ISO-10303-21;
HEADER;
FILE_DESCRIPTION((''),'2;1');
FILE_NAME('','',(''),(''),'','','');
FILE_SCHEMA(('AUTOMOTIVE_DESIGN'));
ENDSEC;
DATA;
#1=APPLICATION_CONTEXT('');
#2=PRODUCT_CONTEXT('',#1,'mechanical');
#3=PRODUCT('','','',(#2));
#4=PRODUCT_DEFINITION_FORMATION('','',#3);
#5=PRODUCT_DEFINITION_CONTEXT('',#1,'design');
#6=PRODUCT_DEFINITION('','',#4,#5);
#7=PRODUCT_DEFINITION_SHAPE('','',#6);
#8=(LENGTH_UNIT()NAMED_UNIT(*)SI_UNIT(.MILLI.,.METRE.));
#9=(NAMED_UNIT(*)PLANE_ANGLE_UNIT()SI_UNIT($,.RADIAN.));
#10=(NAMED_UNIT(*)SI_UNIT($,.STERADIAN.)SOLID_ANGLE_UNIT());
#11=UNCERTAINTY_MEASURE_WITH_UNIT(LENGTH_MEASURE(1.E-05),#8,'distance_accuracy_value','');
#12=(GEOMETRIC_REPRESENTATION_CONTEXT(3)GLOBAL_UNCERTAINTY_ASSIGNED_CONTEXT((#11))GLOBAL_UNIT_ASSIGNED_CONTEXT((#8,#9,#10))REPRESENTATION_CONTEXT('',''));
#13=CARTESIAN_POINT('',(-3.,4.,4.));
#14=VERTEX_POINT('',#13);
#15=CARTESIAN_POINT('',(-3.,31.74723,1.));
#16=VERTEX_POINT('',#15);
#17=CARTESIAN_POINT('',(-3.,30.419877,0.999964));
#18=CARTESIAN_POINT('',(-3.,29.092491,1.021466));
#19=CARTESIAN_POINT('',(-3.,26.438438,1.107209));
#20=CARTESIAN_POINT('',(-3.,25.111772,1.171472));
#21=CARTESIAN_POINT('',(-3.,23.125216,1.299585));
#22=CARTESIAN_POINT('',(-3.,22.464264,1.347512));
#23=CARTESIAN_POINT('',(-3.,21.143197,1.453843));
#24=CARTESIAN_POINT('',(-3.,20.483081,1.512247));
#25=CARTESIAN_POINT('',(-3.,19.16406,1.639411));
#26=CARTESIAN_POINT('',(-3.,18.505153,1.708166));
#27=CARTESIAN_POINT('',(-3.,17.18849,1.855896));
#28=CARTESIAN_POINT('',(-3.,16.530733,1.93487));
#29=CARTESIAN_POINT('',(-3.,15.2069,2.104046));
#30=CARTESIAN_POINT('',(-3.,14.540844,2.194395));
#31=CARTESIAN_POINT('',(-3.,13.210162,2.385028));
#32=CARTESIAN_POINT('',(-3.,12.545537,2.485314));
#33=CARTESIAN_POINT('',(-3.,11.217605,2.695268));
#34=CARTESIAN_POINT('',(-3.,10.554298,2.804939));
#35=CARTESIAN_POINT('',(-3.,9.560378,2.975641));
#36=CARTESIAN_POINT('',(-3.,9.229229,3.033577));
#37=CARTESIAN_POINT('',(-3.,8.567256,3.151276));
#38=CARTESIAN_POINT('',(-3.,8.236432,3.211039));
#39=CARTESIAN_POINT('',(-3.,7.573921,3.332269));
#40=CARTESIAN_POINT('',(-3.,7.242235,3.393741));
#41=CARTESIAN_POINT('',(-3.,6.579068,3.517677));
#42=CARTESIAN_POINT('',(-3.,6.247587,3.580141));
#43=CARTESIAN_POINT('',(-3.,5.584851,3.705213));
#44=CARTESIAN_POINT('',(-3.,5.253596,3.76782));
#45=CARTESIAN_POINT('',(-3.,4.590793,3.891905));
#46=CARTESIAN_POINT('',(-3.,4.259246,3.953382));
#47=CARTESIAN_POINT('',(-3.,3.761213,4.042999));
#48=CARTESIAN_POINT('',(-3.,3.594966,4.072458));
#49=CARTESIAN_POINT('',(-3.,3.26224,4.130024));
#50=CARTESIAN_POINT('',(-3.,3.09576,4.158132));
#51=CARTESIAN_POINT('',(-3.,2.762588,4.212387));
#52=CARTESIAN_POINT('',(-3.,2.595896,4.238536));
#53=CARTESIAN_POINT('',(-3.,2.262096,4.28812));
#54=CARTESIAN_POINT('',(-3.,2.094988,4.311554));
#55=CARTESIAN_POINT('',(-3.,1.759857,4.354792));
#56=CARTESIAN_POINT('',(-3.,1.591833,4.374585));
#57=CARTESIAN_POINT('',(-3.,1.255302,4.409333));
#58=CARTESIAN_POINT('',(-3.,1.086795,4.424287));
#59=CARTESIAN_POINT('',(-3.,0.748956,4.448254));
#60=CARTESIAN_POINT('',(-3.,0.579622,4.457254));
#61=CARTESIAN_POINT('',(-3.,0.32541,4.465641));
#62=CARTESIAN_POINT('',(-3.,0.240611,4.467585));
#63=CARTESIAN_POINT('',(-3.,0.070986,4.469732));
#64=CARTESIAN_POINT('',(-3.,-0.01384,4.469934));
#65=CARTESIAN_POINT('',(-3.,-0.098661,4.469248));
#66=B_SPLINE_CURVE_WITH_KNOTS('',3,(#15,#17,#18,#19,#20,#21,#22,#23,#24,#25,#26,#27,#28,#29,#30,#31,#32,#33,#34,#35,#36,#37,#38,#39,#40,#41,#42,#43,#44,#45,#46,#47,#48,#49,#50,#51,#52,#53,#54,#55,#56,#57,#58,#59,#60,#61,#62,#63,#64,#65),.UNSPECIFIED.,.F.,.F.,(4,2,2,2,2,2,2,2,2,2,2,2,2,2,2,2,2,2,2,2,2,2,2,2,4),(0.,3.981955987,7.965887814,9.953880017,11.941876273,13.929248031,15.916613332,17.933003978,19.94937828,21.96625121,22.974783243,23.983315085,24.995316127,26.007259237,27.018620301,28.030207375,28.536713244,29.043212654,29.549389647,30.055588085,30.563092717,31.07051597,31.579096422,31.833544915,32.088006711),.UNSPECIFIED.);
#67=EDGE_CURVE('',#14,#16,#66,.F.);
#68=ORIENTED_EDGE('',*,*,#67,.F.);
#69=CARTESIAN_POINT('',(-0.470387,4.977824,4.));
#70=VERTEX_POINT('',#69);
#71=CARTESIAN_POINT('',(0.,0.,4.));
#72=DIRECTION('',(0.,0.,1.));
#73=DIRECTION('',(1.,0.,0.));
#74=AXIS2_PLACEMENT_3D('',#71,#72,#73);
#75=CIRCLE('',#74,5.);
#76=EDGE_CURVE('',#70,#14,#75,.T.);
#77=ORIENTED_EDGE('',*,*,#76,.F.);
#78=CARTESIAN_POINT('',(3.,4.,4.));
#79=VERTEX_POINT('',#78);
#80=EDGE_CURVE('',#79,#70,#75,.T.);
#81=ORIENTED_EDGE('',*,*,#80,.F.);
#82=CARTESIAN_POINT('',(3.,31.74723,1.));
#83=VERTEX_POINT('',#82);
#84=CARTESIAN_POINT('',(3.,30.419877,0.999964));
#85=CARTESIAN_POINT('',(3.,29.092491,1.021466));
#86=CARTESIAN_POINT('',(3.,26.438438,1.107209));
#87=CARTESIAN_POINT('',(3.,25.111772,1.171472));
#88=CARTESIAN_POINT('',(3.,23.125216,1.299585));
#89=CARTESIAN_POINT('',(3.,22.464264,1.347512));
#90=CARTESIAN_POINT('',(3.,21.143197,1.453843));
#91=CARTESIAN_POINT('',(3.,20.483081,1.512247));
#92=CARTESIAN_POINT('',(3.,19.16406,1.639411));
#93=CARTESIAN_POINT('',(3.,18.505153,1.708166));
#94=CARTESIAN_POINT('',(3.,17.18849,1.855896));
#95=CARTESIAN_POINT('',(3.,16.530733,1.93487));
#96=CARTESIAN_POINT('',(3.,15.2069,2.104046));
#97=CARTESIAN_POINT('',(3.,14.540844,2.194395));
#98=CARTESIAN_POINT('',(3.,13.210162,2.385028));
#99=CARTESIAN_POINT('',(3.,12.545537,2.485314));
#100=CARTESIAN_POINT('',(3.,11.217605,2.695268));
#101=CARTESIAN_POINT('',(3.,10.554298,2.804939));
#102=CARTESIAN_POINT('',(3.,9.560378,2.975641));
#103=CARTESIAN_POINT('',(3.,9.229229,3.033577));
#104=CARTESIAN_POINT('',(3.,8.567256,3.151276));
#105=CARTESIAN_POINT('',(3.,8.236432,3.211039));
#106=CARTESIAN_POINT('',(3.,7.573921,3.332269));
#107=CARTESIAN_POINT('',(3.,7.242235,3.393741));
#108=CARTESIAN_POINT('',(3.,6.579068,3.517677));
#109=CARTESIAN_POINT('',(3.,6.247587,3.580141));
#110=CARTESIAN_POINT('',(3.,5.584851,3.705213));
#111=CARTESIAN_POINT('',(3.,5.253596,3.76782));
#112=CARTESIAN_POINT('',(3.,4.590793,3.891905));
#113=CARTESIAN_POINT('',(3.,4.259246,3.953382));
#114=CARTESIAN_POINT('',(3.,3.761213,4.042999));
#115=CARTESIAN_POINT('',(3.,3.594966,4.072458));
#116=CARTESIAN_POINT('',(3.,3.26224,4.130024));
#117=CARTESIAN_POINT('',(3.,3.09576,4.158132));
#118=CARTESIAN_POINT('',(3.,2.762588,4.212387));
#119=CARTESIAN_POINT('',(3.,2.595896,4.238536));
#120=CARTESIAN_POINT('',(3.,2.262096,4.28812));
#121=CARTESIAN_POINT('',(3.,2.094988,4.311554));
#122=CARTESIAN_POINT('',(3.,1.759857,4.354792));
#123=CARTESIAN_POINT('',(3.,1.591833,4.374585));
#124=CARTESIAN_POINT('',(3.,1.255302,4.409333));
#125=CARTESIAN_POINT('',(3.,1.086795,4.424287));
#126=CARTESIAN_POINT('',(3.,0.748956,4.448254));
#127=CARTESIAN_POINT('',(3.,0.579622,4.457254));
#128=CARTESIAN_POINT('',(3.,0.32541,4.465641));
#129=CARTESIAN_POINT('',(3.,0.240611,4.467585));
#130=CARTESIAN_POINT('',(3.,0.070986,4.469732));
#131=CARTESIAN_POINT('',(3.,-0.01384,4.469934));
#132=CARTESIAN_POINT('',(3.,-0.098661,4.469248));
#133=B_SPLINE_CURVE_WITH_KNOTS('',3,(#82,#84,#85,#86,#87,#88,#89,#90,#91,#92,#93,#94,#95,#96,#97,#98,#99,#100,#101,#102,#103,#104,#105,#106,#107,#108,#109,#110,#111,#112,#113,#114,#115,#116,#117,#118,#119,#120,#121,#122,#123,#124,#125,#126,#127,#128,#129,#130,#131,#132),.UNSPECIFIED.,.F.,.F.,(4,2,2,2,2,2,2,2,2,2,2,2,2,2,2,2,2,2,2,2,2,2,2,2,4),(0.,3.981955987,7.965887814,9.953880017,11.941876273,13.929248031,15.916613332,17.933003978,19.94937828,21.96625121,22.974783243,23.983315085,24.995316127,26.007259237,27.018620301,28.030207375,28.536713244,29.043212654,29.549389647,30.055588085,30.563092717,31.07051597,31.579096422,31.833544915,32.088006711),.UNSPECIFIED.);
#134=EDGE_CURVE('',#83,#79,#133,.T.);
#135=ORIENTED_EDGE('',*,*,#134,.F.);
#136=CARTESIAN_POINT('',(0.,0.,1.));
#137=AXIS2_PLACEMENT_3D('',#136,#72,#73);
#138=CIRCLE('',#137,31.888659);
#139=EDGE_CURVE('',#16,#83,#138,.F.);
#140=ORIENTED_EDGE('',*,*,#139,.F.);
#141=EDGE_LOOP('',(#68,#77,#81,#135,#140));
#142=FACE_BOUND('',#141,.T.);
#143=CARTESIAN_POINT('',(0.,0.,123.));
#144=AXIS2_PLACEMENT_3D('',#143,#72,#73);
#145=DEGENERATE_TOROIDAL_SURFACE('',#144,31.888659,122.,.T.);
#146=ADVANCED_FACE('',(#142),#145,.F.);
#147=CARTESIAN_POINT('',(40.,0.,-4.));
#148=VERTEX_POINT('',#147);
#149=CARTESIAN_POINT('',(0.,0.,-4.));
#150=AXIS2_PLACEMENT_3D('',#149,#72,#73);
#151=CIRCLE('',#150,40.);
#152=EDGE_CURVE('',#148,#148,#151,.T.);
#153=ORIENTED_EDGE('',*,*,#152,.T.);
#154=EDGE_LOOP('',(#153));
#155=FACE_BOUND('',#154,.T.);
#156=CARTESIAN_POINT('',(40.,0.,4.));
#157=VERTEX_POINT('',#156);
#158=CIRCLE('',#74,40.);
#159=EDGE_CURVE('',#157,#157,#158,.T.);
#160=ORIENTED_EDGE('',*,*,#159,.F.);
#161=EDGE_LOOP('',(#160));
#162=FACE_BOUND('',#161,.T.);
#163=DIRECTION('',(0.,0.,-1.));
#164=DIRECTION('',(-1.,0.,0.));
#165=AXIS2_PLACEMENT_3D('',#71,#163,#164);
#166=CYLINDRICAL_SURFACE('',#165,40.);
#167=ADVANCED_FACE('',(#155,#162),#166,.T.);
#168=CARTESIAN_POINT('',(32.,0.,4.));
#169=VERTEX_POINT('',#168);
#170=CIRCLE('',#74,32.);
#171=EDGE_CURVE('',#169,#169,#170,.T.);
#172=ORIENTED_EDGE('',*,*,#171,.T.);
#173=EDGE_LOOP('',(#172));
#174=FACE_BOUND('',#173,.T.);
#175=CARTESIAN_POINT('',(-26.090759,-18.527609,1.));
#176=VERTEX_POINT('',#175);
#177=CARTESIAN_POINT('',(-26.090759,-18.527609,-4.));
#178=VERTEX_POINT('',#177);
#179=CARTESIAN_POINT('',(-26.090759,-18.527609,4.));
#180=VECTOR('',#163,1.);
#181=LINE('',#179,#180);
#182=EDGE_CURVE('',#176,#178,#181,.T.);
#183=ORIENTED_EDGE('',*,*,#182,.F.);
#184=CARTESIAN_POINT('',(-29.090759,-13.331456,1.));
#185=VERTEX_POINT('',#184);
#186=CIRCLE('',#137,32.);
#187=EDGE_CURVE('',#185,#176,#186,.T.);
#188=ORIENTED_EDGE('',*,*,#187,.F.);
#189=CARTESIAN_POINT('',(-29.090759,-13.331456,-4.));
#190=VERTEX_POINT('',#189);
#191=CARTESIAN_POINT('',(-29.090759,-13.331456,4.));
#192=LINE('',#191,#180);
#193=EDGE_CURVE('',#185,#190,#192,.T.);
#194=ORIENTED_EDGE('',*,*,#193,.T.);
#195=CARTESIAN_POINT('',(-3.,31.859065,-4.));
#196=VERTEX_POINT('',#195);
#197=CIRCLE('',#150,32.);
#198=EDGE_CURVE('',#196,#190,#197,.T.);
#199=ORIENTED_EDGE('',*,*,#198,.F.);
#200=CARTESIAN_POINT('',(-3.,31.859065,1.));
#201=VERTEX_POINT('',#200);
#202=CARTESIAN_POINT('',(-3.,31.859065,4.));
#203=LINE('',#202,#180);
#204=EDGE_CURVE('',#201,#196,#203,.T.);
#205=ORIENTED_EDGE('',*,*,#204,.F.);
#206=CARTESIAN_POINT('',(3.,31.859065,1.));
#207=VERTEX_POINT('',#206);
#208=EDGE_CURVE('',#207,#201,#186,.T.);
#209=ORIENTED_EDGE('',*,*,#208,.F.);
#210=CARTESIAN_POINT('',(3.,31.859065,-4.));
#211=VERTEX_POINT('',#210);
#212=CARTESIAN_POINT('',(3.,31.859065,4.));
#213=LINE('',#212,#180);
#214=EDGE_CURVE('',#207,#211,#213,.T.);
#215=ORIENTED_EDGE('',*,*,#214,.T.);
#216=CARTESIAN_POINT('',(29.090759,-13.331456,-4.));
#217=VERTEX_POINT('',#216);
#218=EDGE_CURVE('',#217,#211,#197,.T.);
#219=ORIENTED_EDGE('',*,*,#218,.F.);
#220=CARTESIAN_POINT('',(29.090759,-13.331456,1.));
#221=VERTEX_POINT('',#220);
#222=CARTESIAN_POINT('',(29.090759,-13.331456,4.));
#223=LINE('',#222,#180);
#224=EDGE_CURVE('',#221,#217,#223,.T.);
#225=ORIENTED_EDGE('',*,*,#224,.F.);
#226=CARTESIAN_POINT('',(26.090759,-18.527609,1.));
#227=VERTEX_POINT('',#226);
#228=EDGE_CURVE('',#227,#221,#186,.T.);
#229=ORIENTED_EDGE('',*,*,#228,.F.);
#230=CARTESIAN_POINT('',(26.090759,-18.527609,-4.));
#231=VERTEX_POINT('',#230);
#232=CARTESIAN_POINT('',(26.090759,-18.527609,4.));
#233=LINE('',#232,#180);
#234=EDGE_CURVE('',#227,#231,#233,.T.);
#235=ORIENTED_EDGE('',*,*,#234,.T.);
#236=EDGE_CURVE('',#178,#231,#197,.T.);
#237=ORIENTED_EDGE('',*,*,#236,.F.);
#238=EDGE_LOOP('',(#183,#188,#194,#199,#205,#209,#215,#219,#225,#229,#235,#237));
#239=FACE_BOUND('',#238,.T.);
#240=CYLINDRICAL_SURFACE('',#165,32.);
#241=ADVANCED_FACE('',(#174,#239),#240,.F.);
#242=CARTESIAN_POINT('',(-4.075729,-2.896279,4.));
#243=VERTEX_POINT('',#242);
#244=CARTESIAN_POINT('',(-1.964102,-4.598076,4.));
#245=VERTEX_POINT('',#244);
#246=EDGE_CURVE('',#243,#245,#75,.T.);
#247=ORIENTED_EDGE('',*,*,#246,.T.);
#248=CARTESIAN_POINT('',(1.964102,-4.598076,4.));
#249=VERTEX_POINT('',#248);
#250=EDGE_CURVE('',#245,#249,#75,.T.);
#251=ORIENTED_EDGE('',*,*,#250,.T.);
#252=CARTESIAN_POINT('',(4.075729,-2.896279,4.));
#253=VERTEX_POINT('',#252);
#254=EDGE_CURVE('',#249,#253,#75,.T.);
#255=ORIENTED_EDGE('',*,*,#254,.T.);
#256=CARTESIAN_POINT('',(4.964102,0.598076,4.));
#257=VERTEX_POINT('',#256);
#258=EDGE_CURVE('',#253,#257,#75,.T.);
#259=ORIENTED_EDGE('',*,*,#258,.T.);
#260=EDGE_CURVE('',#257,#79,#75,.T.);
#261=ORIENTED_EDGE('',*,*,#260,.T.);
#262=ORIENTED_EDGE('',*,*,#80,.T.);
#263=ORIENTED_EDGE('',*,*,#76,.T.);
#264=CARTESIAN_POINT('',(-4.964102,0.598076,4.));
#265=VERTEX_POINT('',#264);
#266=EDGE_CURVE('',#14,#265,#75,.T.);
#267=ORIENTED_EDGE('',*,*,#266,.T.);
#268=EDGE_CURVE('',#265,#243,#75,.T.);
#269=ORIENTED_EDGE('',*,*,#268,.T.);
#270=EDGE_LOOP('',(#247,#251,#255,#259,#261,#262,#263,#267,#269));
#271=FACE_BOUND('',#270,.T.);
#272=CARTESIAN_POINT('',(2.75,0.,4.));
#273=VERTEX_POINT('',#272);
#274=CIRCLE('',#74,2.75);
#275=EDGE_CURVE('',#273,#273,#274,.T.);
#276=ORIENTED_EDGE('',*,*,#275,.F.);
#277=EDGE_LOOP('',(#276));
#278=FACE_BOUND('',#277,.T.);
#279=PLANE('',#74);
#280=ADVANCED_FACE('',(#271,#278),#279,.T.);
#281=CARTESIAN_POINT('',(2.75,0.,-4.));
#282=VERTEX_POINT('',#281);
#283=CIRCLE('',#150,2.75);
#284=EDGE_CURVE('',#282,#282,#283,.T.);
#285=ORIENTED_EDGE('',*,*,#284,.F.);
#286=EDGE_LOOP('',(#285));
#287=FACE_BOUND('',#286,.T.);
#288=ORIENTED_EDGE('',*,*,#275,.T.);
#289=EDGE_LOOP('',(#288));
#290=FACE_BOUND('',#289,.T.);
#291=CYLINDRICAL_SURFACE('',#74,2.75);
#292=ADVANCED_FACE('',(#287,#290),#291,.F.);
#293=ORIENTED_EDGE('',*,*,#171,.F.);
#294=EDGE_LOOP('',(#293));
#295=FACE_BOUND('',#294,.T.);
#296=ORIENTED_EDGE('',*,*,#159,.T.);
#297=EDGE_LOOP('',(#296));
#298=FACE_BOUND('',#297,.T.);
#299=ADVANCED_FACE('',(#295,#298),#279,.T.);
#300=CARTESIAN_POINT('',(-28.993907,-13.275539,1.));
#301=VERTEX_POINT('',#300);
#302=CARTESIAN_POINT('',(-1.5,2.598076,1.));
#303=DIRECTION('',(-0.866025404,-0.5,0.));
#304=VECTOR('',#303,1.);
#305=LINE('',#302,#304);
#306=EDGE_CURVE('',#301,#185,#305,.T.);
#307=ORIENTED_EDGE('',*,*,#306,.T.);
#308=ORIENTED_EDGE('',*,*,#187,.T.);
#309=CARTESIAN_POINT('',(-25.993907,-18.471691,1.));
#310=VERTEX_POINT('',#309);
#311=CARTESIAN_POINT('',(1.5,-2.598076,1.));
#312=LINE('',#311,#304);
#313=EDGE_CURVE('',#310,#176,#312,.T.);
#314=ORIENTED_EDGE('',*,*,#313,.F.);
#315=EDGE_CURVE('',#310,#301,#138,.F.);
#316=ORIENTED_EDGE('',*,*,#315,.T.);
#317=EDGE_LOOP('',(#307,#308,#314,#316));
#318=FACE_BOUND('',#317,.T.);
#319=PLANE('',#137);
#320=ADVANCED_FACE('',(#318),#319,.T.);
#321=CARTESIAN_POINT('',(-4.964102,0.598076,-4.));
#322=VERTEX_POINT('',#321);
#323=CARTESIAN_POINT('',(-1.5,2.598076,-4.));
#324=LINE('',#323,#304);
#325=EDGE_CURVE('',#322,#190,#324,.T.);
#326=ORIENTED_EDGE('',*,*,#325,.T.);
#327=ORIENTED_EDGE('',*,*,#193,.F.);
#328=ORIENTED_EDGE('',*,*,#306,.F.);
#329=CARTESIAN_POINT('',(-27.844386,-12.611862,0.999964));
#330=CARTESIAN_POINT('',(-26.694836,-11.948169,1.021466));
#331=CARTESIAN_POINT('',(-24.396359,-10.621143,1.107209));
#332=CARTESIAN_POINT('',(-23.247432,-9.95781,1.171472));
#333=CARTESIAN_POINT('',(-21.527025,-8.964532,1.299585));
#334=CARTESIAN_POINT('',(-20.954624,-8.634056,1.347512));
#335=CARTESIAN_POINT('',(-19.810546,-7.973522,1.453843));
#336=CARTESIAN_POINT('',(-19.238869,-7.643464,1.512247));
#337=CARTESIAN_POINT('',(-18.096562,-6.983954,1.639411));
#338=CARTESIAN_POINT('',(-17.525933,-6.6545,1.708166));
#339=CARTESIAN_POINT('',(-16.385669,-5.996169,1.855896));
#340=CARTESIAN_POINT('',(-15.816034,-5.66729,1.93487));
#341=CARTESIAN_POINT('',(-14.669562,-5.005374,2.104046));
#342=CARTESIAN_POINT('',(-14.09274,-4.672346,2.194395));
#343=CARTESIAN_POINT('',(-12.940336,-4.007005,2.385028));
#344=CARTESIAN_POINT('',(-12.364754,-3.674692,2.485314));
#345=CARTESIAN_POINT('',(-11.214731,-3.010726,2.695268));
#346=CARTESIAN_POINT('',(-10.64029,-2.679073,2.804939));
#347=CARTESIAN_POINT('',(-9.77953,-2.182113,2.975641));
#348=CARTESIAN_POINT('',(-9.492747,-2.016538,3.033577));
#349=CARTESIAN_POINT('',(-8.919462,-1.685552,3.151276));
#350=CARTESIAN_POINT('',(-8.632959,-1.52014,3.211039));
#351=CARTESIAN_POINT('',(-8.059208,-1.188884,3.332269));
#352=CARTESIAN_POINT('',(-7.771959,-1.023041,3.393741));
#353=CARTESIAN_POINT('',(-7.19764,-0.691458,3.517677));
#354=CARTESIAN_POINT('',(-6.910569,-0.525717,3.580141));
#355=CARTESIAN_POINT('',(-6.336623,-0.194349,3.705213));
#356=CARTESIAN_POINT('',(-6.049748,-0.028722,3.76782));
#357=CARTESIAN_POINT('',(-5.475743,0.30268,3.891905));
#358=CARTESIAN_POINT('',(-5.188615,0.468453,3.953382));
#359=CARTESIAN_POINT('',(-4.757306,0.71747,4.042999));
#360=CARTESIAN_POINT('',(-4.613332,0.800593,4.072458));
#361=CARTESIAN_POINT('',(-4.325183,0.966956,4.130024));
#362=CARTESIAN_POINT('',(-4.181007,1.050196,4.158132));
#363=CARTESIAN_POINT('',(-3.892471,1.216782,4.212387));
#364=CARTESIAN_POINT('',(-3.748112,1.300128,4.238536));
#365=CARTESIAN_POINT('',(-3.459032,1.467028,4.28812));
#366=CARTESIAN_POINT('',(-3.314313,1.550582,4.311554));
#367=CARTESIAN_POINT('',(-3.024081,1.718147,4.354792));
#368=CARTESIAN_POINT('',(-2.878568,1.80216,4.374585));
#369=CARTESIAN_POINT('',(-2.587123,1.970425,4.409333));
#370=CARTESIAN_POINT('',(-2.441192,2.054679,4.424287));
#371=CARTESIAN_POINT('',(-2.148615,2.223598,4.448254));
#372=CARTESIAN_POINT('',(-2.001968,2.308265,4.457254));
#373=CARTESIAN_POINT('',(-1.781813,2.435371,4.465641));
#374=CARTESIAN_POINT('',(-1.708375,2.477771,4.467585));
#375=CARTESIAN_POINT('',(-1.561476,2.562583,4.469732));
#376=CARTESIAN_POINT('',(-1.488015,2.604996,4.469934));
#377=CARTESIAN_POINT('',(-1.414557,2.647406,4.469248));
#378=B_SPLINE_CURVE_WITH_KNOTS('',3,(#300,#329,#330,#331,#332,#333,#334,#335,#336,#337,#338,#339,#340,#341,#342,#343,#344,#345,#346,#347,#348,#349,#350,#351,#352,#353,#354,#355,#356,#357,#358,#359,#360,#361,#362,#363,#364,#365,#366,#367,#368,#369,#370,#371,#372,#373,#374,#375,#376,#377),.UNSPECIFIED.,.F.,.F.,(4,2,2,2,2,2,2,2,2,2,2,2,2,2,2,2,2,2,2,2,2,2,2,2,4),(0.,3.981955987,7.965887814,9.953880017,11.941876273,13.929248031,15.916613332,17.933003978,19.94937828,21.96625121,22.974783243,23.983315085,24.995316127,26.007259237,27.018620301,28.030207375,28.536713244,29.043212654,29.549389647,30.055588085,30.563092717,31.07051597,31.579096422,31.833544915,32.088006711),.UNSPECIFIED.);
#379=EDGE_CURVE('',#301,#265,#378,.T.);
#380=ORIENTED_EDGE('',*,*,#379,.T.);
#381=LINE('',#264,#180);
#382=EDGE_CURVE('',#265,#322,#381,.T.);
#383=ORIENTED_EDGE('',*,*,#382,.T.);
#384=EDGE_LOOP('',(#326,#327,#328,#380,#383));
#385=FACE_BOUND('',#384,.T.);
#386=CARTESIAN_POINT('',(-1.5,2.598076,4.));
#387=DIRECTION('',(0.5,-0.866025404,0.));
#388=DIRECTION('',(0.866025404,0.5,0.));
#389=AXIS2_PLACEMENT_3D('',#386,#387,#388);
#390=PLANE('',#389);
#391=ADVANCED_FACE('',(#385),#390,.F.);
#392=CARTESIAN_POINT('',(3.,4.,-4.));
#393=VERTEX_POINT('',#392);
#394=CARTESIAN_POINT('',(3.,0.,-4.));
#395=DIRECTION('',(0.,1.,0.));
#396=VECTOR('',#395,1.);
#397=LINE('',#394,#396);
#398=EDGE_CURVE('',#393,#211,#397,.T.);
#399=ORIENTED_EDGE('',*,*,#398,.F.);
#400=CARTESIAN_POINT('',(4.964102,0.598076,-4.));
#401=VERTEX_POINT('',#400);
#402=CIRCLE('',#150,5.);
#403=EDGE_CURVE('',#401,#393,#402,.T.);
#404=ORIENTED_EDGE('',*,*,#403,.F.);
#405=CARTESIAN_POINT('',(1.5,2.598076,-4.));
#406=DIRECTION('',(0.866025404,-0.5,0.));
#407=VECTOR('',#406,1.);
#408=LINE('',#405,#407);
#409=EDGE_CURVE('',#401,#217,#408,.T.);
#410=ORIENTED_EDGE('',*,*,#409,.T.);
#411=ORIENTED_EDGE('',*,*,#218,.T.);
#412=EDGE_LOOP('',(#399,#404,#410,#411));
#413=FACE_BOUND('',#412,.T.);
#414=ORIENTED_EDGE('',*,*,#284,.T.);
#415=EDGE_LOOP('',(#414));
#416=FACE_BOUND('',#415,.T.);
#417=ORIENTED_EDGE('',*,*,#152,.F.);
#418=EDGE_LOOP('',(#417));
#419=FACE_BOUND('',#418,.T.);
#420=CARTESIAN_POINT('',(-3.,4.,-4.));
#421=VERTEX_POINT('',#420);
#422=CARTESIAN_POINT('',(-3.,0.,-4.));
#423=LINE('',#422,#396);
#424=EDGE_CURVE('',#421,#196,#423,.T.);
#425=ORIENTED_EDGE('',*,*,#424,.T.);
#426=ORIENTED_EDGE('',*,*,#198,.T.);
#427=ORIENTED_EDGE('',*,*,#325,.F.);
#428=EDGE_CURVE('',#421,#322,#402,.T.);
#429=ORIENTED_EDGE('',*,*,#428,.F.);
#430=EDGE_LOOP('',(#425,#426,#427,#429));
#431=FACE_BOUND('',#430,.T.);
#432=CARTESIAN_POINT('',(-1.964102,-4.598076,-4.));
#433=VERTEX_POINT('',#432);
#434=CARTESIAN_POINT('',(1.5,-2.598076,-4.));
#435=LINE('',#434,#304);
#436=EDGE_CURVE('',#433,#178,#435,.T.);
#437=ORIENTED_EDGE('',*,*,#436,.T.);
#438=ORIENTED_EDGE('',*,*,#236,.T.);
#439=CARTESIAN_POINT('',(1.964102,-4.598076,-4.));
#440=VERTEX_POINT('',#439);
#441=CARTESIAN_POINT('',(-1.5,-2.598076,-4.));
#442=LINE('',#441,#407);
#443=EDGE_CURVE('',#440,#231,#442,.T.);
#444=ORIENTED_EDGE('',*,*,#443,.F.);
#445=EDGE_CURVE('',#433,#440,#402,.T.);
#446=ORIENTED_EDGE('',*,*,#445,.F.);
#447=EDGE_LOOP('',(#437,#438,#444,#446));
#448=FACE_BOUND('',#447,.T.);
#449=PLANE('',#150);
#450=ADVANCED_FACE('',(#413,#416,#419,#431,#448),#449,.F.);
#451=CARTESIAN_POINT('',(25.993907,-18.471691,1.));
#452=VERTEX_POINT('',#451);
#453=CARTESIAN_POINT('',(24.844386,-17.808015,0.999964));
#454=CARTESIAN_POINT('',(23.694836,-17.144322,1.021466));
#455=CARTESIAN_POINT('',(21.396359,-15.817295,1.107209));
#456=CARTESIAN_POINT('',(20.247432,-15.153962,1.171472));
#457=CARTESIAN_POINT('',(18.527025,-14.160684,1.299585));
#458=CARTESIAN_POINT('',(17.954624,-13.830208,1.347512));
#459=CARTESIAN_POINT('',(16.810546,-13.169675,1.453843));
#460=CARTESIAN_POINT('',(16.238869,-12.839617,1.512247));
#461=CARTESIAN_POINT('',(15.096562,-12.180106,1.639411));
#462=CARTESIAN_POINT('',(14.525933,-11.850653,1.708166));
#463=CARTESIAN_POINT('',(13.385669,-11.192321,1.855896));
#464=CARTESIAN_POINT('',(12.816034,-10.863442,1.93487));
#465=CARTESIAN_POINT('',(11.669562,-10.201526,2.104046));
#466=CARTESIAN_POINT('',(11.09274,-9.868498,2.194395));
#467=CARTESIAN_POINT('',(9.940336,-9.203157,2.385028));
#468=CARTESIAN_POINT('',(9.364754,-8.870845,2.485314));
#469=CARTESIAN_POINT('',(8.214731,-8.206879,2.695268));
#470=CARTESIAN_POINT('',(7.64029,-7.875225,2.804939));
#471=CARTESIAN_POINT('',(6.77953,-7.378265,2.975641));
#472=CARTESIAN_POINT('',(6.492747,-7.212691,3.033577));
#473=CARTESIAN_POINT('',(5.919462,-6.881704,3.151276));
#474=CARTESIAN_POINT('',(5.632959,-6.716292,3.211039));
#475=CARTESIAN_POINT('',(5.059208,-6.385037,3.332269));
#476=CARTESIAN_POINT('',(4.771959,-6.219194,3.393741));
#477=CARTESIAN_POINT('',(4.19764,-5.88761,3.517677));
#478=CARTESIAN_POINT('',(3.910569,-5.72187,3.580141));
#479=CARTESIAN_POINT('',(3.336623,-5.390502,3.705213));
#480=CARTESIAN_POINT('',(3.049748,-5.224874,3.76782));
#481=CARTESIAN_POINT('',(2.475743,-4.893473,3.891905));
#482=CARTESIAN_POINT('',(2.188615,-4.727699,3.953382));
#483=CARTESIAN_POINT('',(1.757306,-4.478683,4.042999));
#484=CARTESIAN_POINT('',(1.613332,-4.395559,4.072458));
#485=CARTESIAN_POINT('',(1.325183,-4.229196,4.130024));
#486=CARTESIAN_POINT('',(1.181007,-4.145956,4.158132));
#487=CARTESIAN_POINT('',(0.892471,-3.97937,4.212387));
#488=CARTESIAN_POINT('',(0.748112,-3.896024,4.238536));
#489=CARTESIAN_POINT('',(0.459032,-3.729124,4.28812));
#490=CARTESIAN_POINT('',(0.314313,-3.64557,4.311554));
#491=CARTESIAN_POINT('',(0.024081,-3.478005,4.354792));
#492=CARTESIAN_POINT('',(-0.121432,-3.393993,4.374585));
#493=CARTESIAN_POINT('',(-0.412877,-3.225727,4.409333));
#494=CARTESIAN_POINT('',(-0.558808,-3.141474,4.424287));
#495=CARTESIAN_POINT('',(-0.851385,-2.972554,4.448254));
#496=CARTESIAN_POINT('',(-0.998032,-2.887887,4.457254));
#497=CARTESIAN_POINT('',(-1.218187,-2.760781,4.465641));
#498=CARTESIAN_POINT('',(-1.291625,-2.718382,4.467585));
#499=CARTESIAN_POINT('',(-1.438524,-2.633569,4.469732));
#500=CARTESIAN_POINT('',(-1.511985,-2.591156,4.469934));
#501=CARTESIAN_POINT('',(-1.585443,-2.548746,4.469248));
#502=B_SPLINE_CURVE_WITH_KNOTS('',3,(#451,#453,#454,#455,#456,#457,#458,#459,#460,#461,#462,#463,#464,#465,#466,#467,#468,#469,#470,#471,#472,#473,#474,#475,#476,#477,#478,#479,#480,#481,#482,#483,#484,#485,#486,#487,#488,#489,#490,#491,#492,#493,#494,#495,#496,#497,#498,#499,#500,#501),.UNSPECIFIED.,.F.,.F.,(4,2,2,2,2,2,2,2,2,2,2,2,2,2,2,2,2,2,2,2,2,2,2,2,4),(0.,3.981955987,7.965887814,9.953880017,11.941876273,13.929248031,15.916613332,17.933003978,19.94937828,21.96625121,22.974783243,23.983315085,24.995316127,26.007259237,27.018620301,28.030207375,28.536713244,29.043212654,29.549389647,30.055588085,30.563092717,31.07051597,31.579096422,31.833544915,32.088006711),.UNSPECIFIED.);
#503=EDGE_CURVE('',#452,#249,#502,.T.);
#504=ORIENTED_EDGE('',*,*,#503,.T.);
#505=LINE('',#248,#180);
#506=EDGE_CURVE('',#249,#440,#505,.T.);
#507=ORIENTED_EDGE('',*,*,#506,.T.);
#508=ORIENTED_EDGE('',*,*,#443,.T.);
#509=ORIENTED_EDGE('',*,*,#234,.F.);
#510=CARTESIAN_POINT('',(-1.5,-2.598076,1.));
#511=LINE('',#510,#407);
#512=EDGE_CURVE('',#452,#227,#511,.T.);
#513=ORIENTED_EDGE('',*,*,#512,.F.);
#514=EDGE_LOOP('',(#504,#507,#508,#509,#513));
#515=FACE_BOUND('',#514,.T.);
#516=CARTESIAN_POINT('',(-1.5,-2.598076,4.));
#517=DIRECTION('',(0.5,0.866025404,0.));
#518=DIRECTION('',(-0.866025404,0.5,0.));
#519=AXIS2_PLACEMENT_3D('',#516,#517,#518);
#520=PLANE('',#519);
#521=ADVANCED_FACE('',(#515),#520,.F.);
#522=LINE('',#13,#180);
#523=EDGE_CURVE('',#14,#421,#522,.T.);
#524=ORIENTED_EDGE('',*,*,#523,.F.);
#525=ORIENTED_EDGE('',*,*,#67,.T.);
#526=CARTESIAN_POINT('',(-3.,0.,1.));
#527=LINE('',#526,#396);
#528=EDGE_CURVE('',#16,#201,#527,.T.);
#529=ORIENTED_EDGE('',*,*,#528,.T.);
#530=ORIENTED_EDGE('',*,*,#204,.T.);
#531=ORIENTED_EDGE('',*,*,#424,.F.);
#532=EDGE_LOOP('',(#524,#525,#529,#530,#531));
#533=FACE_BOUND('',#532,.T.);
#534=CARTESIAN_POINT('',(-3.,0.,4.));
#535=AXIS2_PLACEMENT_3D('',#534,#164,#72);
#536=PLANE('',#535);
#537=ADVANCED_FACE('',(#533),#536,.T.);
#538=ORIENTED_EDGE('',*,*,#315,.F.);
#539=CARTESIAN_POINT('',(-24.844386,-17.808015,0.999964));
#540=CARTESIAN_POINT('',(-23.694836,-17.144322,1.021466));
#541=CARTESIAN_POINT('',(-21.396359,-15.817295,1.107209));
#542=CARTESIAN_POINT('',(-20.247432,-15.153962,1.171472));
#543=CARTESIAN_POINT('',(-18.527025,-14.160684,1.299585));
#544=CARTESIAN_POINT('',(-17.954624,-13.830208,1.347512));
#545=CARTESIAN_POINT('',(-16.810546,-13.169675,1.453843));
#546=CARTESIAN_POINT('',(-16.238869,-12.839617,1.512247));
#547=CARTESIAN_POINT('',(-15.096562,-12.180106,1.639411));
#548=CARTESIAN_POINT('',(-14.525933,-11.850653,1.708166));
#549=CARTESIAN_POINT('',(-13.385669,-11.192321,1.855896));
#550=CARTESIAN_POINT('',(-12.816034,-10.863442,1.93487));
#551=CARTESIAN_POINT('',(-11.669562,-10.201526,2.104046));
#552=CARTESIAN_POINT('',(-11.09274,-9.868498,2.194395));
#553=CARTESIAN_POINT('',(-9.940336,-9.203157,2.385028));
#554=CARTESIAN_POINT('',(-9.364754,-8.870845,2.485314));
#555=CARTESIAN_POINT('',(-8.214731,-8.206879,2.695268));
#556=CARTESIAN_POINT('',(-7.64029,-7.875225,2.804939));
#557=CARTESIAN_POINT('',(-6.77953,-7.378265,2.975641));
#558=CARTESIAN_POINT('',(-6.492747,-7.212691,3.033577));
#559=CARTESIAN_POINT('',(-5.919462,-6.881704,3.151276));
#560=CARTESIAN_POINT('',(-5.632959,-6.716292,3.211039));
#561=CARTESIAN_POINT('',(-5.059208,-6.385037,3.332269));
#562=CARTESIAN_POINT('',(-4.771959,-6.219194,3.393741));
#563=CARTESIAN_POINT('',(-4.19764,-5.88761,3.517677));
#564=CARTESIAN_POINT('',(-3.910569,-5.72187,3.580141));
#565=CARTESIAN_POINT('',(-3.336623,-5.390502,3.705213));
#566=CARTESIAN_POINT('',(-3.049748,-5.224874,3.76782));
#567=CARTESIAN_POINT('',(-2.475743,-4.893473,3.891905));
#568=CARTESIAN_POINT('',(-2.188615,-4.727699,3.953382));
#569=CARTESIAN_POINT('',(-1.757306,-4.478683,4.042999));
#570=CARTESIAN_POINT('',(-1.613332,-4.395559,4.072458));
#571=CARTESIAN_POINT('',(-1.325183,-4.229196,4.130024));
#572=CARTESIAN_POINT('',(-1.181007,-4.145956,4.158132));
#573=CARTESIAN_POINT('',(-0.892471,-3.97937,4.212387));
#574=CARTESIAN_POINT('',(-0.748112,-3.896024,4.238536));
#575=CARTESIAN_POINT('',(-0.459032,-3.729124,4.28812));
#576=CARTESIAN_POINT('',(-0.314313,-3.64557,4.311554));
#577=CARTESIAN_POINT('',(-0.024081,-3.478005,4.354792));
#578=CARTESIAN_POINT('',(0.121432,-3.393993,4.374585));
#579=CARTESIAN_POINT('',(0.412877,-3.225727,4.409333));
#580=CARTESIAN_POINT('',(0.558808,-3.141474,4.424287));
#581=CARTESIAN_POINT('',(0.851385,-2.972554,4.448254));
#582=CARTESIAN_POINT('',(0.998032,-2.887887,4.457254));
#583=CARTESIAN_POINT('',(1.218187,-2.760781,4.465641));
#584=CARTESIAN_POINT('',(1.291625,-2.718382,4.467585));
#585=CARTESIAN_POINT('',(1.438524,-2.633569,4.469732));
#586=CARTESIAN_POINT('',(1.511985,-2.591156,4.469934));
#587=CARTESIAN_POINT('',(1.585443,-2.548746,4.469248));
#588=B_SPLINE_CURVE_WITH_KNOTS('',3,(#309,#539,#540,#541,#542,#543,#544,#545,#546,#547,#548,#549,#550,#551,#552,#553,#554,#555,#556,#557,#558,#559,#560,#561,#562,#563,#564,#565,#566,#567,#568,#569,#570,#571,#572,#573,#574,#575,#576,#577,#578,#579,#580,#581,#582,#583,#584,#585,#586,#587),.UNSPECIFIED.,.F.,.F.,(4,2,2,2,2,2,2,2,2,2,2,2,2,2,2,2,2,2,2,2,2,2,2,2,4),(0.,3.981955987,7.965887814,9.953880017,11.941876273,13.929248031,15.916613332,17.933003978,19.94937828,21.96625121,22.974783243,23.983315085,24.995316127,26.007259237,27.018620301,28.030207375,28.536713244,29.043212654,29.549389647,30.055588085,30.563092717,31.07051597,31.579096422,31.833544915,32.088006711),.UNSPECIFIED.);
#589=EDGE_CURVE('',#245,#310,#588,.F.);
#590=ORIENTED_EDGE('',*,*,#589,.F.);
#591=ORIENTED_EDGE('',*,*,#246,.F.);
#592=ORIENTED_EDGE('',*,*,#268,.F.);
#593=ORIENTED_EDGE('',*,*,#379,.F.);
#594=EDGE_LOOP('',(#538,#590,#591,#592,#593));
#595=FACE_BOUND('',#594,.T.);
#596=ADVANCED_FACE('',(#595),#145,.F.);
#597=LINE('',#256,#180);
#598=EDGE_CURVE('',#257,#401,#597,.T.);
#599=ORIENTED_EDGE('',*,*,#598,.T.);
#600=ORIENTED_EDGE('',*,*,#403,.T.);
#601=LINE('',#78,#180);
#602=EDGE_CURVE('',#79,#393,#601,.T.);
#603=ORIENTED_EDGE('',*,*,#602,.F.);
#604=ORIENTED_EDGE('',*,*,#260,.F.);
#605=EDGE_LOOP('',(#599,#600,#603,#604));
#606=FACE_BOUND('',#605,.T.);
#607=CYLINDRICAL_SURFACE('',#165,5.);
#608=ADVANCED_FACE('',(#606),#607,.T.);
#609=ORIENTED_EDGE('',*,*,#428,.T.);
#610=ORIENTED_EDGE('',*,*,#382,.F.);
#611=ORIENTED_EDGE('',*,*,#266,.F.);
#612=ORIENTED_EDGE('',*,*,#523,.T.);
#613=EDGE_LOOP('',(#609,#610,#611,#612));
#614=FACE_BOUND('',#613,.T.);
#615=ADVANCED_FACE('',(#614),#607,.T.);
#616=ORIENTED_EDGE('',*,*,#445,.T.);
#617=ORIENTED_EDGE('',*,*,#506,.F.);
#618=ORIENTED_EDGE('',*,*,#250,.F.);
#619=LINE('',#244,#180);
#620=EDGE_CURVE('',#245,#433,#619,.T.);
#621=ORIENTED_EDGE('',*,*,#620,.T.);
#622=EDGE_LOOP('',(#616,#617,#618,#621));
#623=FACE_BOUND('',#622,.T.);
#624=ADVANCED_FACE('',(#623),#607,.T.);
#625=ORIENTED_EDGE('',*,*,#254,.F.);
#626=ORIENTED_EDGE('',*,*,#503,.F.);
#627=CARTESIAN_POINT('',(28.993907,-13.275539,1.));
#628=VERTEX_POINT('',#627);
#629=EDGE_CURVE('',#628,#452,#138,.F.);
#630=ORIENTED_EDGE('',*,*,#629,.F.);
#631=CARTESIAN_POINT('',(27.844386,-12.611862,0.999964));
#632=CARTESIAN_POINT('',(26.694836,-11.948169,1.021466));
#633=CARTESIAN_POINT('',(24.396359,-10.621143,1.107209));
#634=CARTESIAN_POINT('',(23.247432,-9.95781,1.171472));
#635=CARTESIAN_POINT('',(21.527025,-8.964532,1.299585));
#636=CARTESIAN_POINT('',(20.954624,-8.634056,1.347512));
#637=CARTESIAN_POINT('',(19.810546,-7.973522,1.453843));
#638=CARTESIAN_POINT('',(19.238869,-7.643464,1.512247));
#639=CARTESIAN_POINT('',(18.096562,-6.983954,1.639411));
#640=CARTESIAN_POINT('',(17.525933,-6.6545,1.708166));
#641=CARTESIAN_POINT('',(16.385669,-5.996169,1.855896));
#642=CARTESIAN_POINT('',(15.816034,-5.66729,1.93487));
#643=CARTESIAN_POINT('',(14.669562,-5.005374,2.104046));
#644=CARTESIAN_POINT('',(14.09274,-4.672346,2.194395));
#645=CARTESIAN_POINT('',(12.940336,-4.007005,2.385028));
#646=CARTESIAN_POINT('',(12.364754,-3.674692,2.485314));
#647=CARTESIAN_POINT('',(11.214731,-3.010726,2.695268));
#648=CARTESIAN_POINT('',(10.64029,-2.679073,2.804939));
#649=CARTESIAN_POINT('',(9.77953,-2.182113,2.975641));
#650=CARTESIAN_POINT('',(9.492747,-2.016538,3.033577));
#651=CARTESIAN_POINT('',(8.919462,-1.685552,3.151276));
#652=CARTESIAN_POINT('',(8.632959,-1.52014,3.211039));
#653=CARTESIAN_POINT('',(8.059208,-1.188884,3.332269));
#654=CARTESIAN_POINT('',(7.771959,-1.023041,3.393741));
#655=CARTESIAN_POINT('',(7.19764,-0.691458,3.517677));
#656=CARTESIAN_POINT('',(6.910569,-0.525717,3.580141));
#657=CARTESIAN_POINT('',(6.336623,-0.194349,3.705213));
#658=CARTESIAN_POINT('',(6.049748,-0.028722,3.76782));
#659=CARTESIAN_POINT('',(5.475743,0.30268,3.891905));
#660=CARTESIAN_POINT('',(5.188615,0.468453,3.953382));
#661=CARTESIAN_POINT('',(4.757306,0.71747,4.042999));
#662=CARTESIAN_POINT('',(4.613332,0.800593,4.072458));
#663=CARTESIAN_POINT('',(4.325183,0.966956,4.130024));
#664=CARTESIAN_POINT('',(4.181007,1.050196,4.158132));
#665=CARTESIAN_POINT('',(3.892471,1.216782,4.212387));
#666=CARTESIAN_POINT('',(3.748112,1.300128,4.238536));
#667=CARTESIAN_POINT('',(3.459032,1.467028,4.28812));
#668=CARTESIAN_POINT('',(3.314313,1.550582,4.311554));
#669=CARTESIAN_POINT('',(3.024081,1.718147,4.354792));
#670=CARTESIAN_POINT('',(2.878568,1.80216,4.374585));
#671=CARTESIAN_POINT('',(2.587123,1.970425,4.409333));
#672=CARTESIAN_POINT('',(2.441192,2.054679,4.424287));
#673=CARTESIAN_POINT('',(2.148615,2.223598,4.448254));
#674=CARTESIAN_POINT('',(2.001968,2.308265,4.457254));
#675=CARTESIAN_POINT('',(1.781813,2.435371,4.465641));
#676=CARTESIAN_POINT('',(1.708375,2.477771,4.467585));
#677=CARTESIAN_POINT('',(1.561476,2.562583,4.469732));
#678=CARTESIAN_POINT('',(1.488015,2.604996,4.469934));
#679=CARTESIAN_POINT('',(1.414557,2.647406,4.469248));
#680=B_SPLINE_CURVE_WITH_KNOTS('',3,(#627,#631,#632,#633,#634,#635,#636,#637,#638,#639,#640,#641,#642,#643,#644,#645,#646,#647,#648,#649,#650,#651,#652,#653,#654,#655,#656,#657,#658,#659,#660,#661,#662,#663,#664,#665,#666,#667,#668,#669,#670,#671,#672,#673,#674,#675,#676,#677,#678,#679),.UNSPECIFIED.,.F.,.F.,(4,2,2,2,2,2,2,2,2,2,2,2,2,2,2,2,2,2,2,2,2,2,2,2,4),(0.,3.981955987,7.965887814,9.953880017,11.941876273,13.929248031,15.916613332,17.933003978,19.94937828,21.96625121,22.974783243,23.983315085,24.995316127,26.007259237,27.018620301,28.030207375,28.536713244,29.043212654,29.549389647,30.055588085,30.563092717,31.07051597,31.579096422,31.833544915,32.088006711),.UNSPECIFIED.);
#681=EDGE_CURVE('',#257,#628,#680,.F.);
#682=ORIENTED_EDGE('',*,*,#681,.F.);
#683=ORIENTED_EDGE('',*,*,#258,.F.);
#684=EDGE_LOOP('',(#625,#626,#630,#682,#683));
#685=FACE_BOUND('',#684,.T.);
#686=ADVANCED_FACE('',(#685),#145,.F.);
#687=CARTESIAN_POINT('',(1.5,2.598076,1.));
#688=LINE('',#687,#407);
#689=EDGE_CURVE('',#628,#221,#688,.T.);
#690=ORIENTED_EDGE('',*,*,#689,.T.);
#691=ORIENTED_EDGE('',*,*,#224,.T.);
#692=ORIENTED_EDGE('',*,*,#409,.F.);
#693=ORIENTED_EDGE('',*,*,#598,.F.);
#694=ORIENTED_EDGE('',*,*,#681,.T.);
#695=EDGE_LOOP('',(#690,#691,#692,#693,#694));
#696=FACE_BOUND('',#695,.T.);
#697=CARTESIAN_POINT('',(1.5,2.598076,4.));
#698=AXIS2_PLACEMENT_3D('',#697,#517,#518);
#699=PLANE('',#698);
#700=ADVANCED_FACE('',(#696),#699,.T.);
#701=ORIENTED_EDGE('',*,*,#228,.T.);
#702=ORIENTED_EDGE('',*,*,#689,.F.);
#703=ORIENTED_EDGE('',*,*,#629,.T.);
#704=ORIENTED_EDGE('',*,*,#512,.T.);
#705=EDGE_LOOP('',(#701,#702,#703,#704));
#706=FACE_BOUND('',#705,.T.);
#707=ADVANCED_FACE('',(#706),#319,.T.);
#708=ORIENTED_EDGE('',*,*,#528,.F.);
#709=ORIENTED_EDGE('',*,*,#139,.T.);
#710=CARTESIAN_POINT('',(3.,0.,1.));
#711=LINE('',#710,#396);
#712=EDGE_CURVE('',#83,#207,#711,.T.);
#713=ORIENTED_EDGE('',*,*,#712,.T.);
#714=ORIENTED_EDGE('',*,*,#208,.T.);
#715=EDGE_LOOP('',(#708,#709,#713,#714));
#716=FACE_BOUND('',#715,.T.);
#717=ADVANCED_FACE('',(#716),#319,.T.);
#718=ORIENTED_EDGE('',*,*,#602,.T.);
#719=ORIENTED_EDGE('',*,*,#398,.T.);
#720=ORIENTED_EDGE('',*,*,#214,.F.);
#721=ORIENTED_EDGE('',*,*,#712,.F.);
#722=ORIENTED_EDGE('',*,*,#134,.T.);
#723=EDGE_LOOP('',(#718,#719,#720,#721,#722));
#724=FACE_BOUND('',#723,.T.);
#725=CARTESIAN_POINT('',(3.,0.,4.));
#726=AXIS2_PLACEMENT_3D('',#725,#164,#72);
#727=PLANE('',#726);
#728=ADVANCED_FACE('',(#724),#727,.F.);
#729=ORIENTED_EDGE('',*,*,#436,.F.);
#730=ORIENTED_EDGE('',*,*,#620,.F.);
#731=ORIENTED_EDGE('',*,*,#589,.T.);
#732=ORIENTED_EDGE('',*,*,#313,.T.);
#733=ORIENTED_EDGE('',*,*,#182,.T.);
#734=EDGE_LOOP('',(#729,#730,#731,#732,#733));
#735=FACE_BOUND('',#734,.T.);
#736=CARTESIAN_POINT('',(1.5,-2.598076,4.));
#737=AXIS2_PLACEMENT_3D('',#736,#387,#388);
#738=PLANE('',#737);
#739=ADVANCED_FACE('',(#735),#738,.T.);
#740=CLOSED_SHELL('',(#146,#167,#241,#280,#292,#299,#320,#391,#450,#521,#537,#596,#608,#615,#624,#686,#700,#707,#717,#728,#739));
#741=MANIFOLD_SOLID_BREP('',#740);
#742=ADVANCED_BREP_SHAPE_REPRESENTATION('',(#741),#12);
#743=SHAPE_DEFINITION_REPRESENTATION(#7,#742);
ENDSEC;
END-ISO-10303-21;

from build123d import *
from build123d.topology import SkipClean

# Parameters (mm, degrees)
SKETCH1_R            = 40
SKETCH1_R_2          = 32
SKETCH1_R_3          = 5
BOSS_EXTRUDE1_DEPTH  = 4
SKETCH3_R            = 32
SKETCH3_R_2          = 5
CUT_EXTRUDE2_DEPTH   = 3
FILLET5_R            = 122
M5_CLEARANCE_HOLE1_D = 5.5


with BuildPart() as part:
    # Sketch1 → Boss-Extrude1 (new, symmetric)
    # profile 1 of 5: a face of its own
    with BuildSketch(Plane.XY):
        Circle(SKETCH1_R)
        Circle(SKETCH1_R_2, mode=Mode.SUBTRACT)
    # profile 2 of 5: a face of its own
    with BuildSketch(Plane.XY):
        with BuildLine():
            Line((-3, 31.859064644), (-3, 4))
            ThreePointArc((-3, 4), (0, 5), (3, 4))
            Line((3, 4), (3, 31.859064644))
            ThreePointArc((3, 31.859064644), (0, 32), (-3, 31.859064644))
        make_face()
    # profile 3 of 5: a face of its own
    with BuildSketch(Plane.XY):
        Circle(SKETCH1_R_3)
    # profile 4 of 5: a face of its own
    with BuildSketch(Plane.XY):
        with BuildLine():
            Line((29.090759323, -13.331456111), (4.964101615, 0.598076211))
            ThreePointArc((4.964101615, 0.598076211), (4.991017335, 0.299576304), (5, 0))
            ThreePointArc((5, 0), (4.172559651, -2.754949357), (1.964101615, -4.598076211))
            Line((1.964101615, -4.598076211), (26.090759323, -18.527608533))
            ThreePointArc((26.090759323, -18.527608533), (27.712812921, -16), (29.090759323, -13.331456111))
        make_face()
    # profile 5 of 5: a face of its own
    with BuildSketch(Plane.XY):
        with BuildLine():
            ThreePointArc((-1.964101615, -4.598076211), (-4.330127019, -2.5), (-4.964101615, 0.598076211))
            Line((-4.964101615, 0.598076211), (-29.090759323, -13.331456111))
            ThreePointArc((-29.090759323, -13.331456111), (-27.712812921, -16), (-26.090759323, -18.527608533))
            Line((-26.090759323, -18.527608533), (-1.964101615, -4.598076211))
        make_face()
    extrude(amount=BOSS_EXTRUDE1_DEPTH, both=True)

    # Sketch3 → Cut-Extrude2 (cut)
    with SkipClean():  # the faces are left unmerged after this step: merging them gives an invalid solid
        with BuildSketch(Plane.XY.offset(4)):
            with Locations(Location((0, 0, 0), (0, 0, 204.620621009))):
                Circle(SKETCH3_R)
            with Locations(Location((0, 0, 0), (0, 0, 173.130102354))):
                Circle(SKETCH3_R_2, mode=Mode.SUBTRACT)
        extrude(amount=-CUT_EXTRUDE2_DEPTH, mode=Mode.SUBTRACT)

    # Fillet5
    # the kernel refuses this fillet: 122 mm, written as the material it adds along each edge
    with BuildSketch(Plane(origin=(0, 0, 1), x_dir=(0.8644503363816339, 0.5027182271707281, 0), z_dir=(0.5027182271707281, -0.8644503363816339, 0))) as fillet5_piece_1_section:
        with BuildLine():
            CenterArc((31.888659319, 122), FILLET5_R, 257.267539737, 12.732460263)
            Line((31.888659319, 0), (5, 0))
            Line((5, 0), (5, 3))
        make_face()
    fillet5_piece_1 = revolve(axis=Axis((0, 0, 1), (0, 0, 1)), revolution_arc=359.64, mode=Mode.PRIVATE)
    fillet5_piece_1 = split(fillet5_piece_1, bisect_by=Plane(origin=(3, 0, 1), z_dir=(-1, 0, 0)), keep=Keep.TOP, mode=Mode.PRIVATE)
    fillet5_piece_1 = split(fillet5_piece_1, bisect_by=Plane(origin=(-1.5, 2.598076211, 1), z_dir=(0.5000000000000004, -0.8660254037844384, 0)), keep=Keep.TOP, mode=Mode.PRIVATE)
    fillet5_piece_1 = split(fillet5_piece_1, bisect_by=Plane(origin=(-1.5, -2.598076211, 1), z_dir=(0.49999999999999983, 0.8660254037844387, 0)), keep=Keep.TOP, mode=Mode.PRIVATE)
    add(fillet5_piece_1)
    with BuildSketch(Plane(origin=(0, 0, 1), x_dir=(0.8644503363816339, 0.5027182271707281, 0), z_dir=(0.5027182271707281, -0.8644503363816339, 0))) as fillet5_piece_2_section:
        with BuildLine():
            CenterArc((31.888659319, 122), FILLET5_R, 257.267539737, 12.732460263)
            Line((31.888659319, 0), (5, 0))
            Line((5, 0), (5, 3))
        make_face()
    fillet5_piece_2 = revolve(axis=Axis((0, 0, 1), (0, 0, 1)), revolution_arc=359.64, mode=Mode.PRIVATE)
    fillet5_piece_2 = split(fillet5_piece_2, bisect_by=Plane(origin=(3, 0, 1), z_dir=(-1, 0, 0)), keep=Keep.TOP, mode=Mode.PRIVATE)
    fillet5_piece_2 = split(fillet5_piece_2, bisect_by=Plane(origin=(-3, 0, 1), z_dir=(1, 0, 0)), keep=Keep.TOP, mode=Mode.PRIVATE)
    fillet5_piece_2 = split(fillet5_piece_2, bisect_by=Plane(origin=(1.5, -2.598076211, 1), z_dir=(-0.5000000000000003, 0.8660254037844385, 0)), keep=Keep.TOP, mode=Mode.PRIVATE)
    add(fillet5_piece_2)
    with BuildSketch(Plane(origin=(0, 0, 1), x_dir=(0.8644503363816339, 0.5027182271707281, 0), z_dir=(0.5027182271707281, -0.8644503363816339, 0))) as fillet5_piece_3_section:
        with BuildLine():
            CenterArc((31.888659319, 122), FILLET5_R, 257.267539737, 12.732460263)
            Line((31.888659319, 0), (5, 0))
            Line((5, 0), (5, 3))
        make_face()
    fillet5_piece_3 = revolve(axis=Axis((0, 0, 1), (0, 0, 1)), revolution_arc=359.64, mode=Mode.PRIVATE)
    fillet5_piece_3 = split(fillet5_piece_3, bisect_by=Plane(origin=(1.5, 2.598076211, 1), z_dir=(-0.49999999999999983, -0.8660254037844387, 0)), keep=Keep.TOP, mode=Mode.PRIVATE)
    fillet5_piece_3 = split(fillet5_piece_3, bisect_by=Plane(origin=(-1.5, 2.598076211, 1), z_dir=(0.5000000000000004, -0.8660254037844384, 0)), keep=Keep.TOP, mode=Mode.PRIVATE)
    fillet5_piece_3 = split(fillet5_piece_3, bisect_by=Plane(origin=(1.5, -2.598076211, 1), z_dir=(-0.5000000000000003, 0.8660254037844385, 0)), keep=Keep.TOP, mode=Mode.PRIVATE)
    add(fillet5_piece_3)
    with BuildSketch(Plane(origin=(0, 0, 1), x_dir=(0.8644503363816339, 0.5027182271707281, 0), z_dir=(0.5027182271707281, -0.8644503363816339, 0))) as fillet5_piece_4_section:
        with BuildLine():
            CenterArc((31.888659319, 122), FILLET5_R, 257.267539737, 12.732460263)
            Line((31.888659319, 0), (5, 0))
            Line((5, 0), (5, 3))
        make_face()
    fillet5_piece_4 = revolve(axis=Axis((0, 0, 1), (0, 0, 1)), revolution_arc=359.64, mode=Mode.PRIVATE)
    fillet5_piece_4 = split(fillet5_piece_4, bisect_by=Plane(origin=(1.5, 2.598076211, 1), z_dir=(-0.49999999999999983, -0.8660254037844387, 0)), keep=Keep.TOP, mode=Mode.PRIVATE)
    fillet5_piece_4 = split(fillet5_piece_4, bisect_by=Plane(origin=(1.5, -2.598076211, 1), z_dir=(0.5000000000000003, -0.8660254037844385, 0)), keep=Keep.TOP, mode=Mode.PRIVATE)
    fillet5_piece_4 = split(fillet5_piece_4, bisect_by=Plane(origin=(-1.5, -2.598076211, 1), z_dir=(0.49999999999999983, 0.8660254037844387, 0)), keep=Keep.TOP, mode=Mode.PRIVATE)
    add(fillet5_piece_4)
    with BuildSketch(Plane(origin=(0, 0, 1), x_dir=(-0.8675919238668259, 0.4972768380299447, 0), z_dir=(0.4972768380299447, 0.8675919238668259, 0))) as fillet5_piece_5_section:
        with BuildLine():
            CenterArc((31.888659319, 122), FILLET5_R, 257.267539737, 12.732460263)
            Line((31.888659319, 0), (5, 0))
            Line((5, 0), (5, 3))
        make_face()
    fillet5_piece_5 = revolve(axis=Axis((0, 0, 1), (0, 0, 1)), revolution_arc=359.64, mode=Mode.PRIVATE)
    fillet5_piece_5 = split(fillet5_piece_5, bisect_by=Plane(origin=(1.5, 2.598076211, 1), z_dir=(-0.49999999999999983, -0.8660254037844387, 0)), keep=Keep.TOP, mode=Mode.PRIVATE)
    fillet5_piece_5 = split(fillet5_piece_5, bisect_by=Plane(origin=(-1.5, 2.598076211, 1), z_dir=(0.5000000000000004, -0.8660254037844384, 0)), keep=Keep.TOP, mode=Mode.PRIVATE)
    fillet5_piece_5 = split(fillet5_piece_5, bisect_by=Plane(origin=(-1.5, -2.598076211, 1), z_dir=(0.49999999999999983, 0.8660254037844387, 0)), keep=Keep.TOP, mode=Mode.PRIVATE)
    add(fillet5_piece_5)
    with BuildSketch(Plane(origin=(0, 0, 1), x_dir=(-0.8675919238668259, 0.4972768380299447, 0), z_dir=(0.4972768380299447, 0.8675919238668259, 0))) as fillet5_piece_6_section:
        with BuildLine():
            CenterArc((31.888659319, 122), FILLET5_R, 257.267539737, 12.732460263)
            Line((31.888659319, 0), (5, 0))
            Line((5, 0), (5, 3))
        make_face()
    fillet5_piece_6 = revolve(axis=Axis((0, 0, 1), (0, 0, 1)), revolution_arc=359.64, mode=Mode.PRIVATE)
    fillet5_piece_6 = split(fillet5_piece_6, bisect_by=Plane(origin=(3, 0, 1), z_dir=(-1, 0, 0)), keep=Keep.TOP, mode=Mode.PRIVATE)
    fillet5_piece_6 = split(fillet5_piece_6, bisect_by=Plane(origin=(-1.5, 2.598076211, 1), z_dir=(0.5000000000000004, -0.8660254037844384, 0)), keep=Keep.TOP, mode=Mode.PRIVATE)
    fillet5_piece_6 = split(fillet5_piece_6, bisect_by=Plane(origin=(1.5, -2.598076211, 1), z_dir=(-0.5000000000000003, 0.8660254037844385, 0)), keep=Keep.TOP, mode=Mode.PRIVATE)
    add(fillet5_piece_6)
    with BuildSketch(Plane(origin=(0, 0, 1), x_dir=(-0.8675919238668259, 0.4972768380299447, 0), z_dir=(0.4972768380299447, 0.8675919238668259, 0))) as fillet5_piece_7_section:
        with BuildLine():
            CenterArc((31.888659319, 122), FILLET5_R, 257.267539737, 12.732460263)
            Line((31.888659319, 0), (5, 0))
            Line((5, 0), (5, 3))
        make_face()
    fillet5_piece_7 = revolve(axis=Axis((0, 0, 1), (0, 0, 1)), revolution_arc=359.64, mode=Mode.PRIVATE)
    fillet5_piece_7 = split(fillet5_piece_7, bisect_by=Plane(origin=(3, 0, 1), z_dir=(-1, 0, 0)), keep=Keep.TOP, mode=Mode.PRIVATE)
    fillet5_piece_7 = split(fillet5_piece_7, bisect_by=Plane(origin=(-3, 0, 1), z_dir=(1, 0, 0)), keep=Keep.TOP, mode=Mode.PRIVATE)
    fillet5_piece_7 = split(fillet5_piece_7, bisect_by=Plane(origin=(-1.5, -2.598076211, 1), z_dir=(0.49999999999999983, 0.8660254037844387, 0)), keep=Keep.TOP, mode=Mode.PRIVATE)
    add(fillet5_piece_7)
    with BuildSketch(Plane(origin=(0, 0, 1), x_dir=(0.0031415874858787157, -0.9999950652018581, 0), z_dir=(-0.9999950652018581, -0.0031415874858787157, 0))) as fillet5_piece_8_section:
        with BuildLine():
            CenterArc((31.888659319, 122), FILLET5_R, 257.267539737, 12.732460263)
            Line((31.888659319, 0), (5, 0))
            Line((5, 0), (5, 3))
        make_face()
    fillet5_piece_8 = revolve(axis=Axis((0, 0, 1), (0, 0, 1)), revolution_arc=359.64, mode=Mode.PRIVATE)
    fillet5_piece_8 = split(fillet5_piece_8, bisect_by=Plane(origin=(1.5, 2.598076211, 1), z_dir=(-0.49999999999999983, -0.8660254037844387, 0)), keep=Keep.TOP, mode=Mode.PRIVATE)
    fillet5_piece_8 = split(fillet5_piece_8, bisect_by=Plane(origin=(-1.5, 2.598076211, 1), z_dir=(0.5000000000000004, -0.8660254037844384, 0)), keep=Keep.TOP, mode=Mode.PRIVATE)
    fillet5_piece_8 = split(fillet5_piece_8, bisect_by=Plane(origin=(-1.5, -2.598076211, 1), z_dir=(0.49999999999999983, 0.8660254037844387, 0)), keep=Keep.TOP, mode=Mode.PRIVATE)
    add(fillet5_piece_8)
    with BuildSketch(Plane(origin=(0, 0, 1), x_dir=(0.0031415874858787157, -0.9999950652018581, 0), z_dir=(-0.9999950652018581, -0.0031415874858787157, 0))) as fillet5_piece_9_section:
        with BuildLine():
            CenterArc((31.888659319, 122), FILLET5_R, 257.267539737, 12.732460263)
            Line((31.888659319, 0), (5, 0))
            Line((5, 0), (5, 3))
        make_face()
    fillet5_piece_9 = revolve(axis=Axis((0, 0, 1), (0, 0, 1)), revolution_arc=359.64, mode=Mode.PRIVATE)
    fillet5_piece_9 = split(fillet5_piece_9, bisect_by=Plane(origin=(3, 0, 1), z_dir=(-1, 0, 0)), keep=Keep.TOP, mode=Mode.PRIVATE)
    fillet5_piece_9 = split(fillet5_piece_9, bisect_by=Plane(origin=(-3, 0, 1), z_dir=(1, 0, 0)), keep=Keep.TOP, mode=Mode.PRIVATE)
    fillet5_piece_9 = split(fillet5_piece_9, bisect_by=Plane(origin=(1.5, -2.598076211, 1), z_dir=(-0.5000000000000003, 0.8660254037844385, 0)), keep=Keep.TOP, mode=Mode.PRIVATE)
    add(fillet5_piece_9)
    with BuildSketch(Plane(origin=(0, 0, 1), x_dir=(0.0031415874858787157, -0.9999950652018581, 0), z_dir=(-0.9999950652018581, -0.0031415874858787157, 0))) as fillet5_piece_10_section:
        with BuildLine():
            CenterArc((31.888659319, 122), FILLET5_R, 257.267539737, 12.732460263)
            Line((31.888659319, 0), (5, 0))
            Line((5, 0), (5, 3))
        make_face()
    fillet5_piece_10 = revolve(axis=Axis((0, 0, 1), (0, 0, 1)), revolution_arc=359.64, mode=Mode.PRIVATE)
    fillet5_piece_10 = split(fillet5_piece_10, bisect_by=Plane(origin=(-1.5, 2.598076211, 1), z_dir=(0.5000000000000004, -0.8660254037844384, 0)), keep=Keep.TOP, mode=Mode.PRIVATE)
    fillet5_piece_10 = split(fillet5_piece_10, bisect_by=Plane(origin=(1.5, -2.598076211, 1), z_dir=(-0.5000000000000003, 0.8660254037844385, 0)), keep=Keep.TOP, mode=Mode.PRIVATE)
    fillet5_piece_10 = split(fillet5_piece_10, bisect_by=Plane(origin=(-1.5, -2.598076211, 1), z_dir=(-0.49999999999999983, -0.8660254037844387, 0)), keep=Keep.TOP, mode=Mode.PRIVATE)
    add(fillet5_piece_10)

    # M5 Clearance Hole1 (through all)
    with Locations(Plane.XY.offset(4)):
        with Locations((0, 0)):
            Hole(M5_CLEARANCE_HOLE1_D / 2)


solid = part.part
